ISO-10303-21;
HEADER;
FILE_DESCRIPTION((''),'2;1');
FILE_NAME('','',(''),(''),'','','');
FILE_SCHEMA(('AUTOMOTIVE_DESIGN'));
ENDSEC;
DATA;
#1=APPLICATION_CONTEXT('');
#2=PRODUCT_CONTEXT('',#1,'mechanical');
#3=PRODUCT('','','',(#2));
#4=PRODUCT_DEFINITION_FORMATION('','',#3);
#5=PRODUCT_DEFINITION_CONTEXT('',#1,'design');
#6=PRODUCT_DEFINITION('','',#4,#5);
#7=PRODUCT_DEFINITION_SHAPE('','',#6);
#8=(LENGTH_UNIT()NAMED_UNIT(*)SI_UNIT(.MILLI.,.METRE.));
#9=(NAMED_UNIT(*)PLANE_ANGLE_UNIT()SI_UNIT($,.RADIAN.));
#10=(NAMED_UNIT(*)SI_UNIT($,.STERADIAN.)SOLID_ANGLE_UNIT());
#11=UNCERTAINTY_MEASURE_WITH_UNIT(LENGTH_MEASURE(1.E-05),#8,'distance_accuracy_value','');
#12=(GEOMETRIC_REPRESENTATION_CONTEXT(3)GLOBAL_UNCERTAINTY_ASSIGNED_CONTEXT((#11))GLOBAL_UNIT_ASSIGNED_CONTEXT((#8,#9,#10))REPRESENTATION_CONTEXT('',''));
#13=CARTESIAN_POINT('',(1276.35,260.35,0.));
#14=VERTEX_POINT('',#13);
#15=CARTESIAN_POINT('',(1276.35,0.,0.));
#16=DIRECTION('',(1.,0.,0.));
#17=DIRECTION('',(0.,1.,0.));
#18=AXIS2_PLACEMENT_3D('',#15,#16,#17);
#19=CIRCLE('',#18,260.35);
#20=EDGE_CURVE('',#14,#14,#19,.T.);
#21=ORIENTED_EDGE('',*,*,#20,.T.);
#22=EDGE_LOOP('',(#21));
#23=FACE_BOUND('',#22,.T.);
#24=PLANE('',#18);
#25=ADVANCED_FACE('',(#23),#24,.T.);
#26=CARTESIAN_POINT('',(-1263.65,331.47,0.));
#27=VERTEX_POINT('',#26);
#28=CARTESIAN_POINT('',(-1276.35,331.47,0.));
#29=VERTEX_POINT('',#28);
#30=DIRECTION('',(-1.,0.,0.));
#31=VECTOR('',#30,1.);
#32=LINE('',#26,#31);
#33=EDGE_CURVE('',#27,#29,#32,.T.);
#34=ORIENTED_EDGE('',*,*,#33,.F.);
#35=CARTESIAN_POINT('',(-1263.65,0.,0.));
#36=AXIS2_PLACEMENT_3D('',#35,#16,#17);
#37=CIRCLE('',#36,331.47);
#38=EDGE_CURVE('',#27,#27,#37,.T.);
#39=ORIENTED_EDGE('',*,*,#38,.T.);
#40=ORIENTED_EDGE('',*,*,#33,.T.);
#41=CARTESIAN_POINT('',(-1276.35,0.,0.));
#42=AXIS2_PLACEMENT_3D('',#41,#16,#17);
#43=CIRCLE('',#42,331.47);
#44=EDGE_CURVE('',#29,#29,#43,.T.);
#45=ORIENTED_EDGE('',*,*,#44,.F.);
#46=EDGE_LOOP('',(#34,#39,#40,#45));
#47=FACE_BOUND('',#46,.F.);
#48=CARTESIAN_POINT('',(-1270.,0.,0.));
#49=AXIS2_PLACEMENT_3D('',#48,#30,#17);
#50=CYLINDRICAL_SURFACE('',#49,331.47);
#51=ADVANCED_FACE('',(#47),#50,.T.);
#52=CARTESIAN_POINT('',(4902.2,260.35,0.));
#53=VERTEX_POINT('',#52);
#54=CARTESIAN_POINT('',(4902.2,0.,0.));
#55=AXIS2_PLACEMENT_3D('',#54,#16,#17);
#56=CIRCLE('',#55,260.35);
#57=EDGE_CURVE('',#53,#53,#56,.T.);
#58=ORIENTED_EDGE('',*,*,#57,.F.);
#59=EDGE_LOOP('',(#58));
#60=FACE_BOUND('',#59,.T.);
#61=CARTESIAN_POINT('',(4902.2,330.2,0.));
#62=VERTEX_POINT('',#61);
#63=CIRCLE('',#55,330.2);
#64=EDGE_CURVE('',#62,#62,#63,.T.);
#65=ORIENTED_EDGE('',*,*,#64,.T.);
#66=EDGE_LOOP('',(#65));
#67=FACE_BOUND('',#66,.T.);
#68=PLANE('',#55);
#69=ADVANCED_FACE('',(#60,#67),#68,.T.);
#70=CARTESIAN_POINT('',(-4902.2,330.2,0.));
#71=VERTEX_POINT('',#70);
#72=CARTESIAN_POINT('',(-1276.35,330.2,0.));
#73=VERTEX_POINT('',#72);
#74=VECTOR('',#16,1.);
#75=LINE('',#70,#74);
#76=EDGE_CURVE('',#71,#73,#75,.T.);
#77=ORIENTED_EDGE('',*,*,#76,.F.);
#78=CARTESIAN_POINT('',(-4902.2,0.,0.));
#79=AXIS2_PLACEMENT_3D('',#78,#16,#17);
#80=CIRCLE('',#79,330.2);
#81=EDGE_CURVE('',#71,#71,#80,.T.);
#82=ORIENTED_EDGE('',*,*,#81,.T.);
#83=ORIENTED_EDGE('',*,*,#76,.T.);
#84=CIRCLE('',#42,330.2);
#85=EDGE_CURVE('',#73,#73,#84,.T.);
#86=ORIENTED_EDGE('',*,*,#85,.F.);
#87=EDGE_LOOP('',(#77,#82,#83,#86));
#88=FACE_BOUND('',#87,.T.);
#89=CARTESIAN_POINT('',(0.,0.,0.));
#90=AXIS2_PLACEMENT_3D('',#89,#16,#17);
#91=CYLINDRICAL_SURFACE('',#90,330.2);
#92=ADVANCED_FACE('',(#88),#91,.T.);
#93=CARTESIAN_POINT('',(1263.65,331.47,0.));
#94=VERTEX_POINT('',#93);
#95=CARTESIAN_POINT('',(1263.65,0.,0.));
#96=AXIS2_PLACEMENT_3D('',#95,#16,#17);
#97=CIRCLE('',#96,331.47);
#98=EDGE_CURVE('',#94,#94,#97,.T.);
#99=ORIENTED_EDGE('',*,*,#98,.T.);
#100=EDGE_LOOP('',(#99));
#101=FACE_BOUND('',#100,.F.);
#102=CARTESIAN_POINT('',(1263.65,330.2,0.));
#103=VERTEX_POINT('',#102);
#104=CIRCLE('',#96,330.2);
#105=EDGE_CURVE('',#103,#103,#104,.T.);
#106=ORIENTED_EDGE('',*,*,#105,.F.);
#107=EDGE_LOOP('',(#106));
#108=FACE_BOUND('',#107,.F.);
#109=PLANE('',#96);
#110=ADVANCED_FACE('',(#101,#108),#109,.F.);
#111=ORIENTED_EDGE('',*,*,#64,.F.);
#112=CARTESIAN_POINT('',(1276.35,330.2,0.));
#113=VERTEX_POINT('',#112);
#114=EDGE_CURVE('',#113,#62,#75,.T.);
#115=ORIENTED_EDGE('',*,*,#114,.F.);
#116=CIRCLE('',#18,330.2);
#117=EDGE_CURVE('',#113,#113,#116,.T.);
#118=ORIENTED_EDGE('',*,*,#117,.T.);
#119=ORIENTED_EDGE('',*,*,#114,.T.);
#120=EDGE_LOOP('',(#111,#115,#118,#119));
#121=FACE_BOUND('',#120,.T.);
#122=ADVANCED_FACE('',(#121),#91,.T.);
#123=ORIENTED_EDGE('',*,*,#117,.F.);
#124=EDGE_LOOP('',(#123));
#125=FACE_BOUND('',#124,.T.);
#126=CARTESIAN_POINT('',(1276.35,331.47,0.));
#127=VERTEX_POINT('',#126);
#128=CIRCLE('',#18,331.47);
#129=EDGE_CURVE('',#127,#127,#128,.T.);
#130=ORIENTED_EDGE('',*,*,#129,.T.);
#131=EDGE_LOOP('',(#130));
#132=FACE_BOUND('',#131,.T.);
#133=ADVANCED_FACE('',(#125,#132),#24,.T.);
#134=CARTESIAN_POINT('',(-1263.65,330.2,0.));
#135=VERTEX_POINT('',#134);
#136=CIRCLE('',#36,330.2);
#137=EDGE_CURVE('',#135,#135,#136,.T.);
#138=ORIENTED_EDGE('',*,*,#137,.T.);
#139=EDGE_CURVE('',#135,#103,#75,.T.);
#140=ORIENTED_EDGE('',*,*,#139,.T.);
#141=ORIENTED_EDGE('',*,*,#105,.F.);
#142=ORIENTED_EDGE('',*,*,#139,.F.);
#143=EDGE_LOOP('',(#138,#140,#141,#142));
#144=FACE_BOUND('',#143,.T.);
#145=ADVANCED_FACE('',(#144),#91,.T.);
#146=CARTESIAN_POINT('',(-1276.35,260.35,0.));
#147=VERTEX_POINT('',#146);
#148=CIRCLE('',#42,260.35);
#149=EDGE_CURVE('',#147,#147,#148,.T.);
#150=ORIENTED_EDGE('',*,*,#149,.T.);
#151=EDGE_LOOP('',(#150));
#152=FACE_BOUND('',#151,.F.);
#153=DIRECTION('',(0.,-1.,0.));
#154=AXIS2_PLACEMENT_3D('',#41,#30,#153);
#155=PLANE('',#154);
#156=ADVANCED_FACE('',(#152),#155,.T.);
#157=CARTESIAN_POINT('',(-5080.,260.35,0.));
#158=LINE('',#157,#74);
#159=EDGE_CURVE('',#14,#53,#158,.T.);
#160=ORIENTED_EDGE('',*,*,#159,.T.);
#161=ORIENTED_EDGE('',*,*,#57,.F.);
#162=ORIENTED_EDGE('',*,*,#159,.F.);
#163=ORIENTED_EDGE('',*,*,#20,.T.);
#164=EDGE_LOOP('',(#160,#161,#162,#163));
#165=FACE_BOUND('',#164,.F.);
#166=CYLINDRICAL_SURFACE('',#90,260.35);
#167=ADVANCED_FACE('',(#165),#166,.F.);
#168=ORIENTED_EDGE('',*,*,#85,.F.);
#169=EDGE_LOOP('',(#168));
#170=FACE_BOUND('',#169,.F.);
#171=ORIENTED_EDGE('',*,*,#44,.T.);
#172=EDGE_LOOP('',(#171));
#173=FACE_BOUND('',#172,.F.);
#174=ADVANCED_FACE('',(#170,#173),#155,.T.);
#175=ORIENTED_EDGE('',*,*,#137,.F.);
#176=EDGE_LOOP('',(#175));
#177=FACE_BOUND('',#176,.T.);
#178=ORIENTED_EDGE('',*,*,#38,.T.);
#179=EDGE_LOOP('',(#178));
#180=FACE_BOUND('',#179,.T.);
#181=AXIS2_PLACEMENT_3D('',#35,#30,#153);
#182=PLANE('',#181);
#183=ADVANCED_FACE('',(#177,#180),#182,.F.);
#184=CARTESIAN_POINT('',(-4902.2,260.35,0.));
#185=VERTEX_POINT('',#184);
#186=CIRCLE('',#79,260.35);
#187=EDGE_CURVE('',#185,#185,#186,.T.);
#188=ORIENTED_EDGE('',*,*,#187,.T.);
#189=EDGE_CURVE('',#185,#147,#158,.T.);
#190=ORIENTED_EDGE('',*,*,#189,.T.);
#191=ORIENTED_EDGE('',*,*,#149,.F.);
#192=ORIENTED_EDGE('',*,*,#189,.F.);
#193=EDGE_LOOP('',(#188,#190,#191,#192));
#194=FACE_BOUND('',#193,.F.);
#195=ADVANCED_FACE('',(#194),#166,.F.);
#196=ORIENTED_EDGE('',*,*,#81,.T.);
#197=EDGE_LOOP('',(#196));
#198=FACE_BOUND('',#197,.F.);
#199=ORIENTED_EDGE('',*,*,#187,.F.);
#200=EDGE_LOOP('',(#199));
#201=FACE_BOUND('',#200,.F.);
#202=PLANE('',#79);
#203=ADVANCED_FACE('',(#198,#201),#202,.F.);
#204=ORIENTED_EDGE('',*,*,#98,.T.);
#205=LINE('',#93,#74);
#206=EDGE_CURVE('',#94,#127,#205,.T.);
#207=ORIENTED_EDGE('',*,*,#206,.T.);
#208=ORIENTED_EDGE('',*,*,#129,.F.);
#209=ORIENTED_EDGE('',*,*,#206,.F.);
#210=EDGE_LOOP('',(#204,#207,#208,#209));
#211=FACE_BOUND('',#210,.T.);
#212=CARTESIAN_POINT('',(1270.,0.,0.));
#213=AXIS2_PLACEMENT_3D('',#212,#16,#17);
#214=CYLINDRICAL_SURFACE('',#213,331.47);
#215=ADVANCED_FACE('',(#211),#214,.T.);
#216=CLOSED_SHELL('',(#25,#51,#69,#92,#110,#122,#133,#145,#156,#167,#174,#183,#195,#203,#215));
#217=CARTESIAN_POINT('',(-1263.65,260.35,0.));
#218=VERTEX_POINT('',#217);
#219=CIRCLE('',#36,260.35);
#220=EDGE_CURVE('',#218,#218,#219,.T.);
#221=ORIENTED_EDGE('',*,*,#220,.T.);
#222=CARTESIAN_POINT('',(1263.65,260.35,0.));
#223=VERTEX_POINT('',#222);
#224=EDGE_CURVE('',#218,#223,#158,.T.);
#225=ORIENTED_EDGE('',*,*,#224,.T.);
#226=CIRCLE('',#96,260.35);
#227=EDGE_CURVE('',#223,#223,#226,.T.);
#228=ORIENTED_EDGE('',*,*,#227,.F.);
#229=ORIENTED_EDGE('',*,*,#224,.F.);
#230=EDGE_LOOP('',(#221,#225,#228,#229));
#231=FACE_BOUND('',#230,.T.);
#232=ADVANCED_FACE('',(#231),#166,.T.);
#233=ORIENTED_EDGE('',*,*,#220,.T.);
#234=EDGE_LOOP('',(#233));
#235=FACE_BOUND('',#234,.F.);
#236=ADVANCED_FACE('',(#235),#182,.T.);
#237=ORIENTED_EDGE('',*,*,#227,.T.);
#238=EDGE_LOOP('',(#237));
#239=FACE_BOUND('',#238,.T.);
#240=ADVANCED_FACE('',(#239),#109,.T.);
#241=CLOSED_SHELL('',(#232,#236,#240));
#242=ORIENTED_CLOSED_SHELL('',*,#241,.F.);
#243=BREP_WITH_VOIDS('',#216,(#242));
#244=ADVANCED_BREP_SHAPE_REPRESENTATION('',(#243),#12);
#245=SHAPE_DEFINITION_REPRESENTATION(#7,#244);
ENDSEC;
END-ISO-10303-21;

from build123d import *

# Parameters (mm, degrees)
F0_R     = 330.2
F1_DEPTH = 4902.2
F2_R     = 260.35
F3_DEPTH = 5080
F5_R     = 331.47
F6_DEPTH = 6.35


# Not quite as in the source:
# - a pattern or mirror of a feature is missing from the dataset's text; its kind, count and spacing are read off the source's solid


with BuildPart() as f1:
    # F0 (on Right) → F1 (new body, symmetric)
    with BuildSketch(Plane.YZ):
        Circle(F0_R)
    extrude(amount=F1_DEPTH, both=True)

    # F2 (on Right) → F3 (cut, symmetric)
    with BuildSketch(Plane.YZ):
        Circle(F2_R)
    extrude(amount=F3_DEPTH, both=True, mode=Mode.SUBTRACT)

    # F5 (on offset) → F6 (join, symmetric)
    with BuildSketch(Plane.YZ.offset(1270)):
        Circle(F5_R)
    f6 = extrude(amount=F6_DEPTH, both=True)

    # F6_copies: F6 across plane
    add(f6.mirror(Plane(origin=(0, 0, 0), x_dir=(0, 0, -1), z_dir=(-1, 0, 0))))


solid = f1.part
